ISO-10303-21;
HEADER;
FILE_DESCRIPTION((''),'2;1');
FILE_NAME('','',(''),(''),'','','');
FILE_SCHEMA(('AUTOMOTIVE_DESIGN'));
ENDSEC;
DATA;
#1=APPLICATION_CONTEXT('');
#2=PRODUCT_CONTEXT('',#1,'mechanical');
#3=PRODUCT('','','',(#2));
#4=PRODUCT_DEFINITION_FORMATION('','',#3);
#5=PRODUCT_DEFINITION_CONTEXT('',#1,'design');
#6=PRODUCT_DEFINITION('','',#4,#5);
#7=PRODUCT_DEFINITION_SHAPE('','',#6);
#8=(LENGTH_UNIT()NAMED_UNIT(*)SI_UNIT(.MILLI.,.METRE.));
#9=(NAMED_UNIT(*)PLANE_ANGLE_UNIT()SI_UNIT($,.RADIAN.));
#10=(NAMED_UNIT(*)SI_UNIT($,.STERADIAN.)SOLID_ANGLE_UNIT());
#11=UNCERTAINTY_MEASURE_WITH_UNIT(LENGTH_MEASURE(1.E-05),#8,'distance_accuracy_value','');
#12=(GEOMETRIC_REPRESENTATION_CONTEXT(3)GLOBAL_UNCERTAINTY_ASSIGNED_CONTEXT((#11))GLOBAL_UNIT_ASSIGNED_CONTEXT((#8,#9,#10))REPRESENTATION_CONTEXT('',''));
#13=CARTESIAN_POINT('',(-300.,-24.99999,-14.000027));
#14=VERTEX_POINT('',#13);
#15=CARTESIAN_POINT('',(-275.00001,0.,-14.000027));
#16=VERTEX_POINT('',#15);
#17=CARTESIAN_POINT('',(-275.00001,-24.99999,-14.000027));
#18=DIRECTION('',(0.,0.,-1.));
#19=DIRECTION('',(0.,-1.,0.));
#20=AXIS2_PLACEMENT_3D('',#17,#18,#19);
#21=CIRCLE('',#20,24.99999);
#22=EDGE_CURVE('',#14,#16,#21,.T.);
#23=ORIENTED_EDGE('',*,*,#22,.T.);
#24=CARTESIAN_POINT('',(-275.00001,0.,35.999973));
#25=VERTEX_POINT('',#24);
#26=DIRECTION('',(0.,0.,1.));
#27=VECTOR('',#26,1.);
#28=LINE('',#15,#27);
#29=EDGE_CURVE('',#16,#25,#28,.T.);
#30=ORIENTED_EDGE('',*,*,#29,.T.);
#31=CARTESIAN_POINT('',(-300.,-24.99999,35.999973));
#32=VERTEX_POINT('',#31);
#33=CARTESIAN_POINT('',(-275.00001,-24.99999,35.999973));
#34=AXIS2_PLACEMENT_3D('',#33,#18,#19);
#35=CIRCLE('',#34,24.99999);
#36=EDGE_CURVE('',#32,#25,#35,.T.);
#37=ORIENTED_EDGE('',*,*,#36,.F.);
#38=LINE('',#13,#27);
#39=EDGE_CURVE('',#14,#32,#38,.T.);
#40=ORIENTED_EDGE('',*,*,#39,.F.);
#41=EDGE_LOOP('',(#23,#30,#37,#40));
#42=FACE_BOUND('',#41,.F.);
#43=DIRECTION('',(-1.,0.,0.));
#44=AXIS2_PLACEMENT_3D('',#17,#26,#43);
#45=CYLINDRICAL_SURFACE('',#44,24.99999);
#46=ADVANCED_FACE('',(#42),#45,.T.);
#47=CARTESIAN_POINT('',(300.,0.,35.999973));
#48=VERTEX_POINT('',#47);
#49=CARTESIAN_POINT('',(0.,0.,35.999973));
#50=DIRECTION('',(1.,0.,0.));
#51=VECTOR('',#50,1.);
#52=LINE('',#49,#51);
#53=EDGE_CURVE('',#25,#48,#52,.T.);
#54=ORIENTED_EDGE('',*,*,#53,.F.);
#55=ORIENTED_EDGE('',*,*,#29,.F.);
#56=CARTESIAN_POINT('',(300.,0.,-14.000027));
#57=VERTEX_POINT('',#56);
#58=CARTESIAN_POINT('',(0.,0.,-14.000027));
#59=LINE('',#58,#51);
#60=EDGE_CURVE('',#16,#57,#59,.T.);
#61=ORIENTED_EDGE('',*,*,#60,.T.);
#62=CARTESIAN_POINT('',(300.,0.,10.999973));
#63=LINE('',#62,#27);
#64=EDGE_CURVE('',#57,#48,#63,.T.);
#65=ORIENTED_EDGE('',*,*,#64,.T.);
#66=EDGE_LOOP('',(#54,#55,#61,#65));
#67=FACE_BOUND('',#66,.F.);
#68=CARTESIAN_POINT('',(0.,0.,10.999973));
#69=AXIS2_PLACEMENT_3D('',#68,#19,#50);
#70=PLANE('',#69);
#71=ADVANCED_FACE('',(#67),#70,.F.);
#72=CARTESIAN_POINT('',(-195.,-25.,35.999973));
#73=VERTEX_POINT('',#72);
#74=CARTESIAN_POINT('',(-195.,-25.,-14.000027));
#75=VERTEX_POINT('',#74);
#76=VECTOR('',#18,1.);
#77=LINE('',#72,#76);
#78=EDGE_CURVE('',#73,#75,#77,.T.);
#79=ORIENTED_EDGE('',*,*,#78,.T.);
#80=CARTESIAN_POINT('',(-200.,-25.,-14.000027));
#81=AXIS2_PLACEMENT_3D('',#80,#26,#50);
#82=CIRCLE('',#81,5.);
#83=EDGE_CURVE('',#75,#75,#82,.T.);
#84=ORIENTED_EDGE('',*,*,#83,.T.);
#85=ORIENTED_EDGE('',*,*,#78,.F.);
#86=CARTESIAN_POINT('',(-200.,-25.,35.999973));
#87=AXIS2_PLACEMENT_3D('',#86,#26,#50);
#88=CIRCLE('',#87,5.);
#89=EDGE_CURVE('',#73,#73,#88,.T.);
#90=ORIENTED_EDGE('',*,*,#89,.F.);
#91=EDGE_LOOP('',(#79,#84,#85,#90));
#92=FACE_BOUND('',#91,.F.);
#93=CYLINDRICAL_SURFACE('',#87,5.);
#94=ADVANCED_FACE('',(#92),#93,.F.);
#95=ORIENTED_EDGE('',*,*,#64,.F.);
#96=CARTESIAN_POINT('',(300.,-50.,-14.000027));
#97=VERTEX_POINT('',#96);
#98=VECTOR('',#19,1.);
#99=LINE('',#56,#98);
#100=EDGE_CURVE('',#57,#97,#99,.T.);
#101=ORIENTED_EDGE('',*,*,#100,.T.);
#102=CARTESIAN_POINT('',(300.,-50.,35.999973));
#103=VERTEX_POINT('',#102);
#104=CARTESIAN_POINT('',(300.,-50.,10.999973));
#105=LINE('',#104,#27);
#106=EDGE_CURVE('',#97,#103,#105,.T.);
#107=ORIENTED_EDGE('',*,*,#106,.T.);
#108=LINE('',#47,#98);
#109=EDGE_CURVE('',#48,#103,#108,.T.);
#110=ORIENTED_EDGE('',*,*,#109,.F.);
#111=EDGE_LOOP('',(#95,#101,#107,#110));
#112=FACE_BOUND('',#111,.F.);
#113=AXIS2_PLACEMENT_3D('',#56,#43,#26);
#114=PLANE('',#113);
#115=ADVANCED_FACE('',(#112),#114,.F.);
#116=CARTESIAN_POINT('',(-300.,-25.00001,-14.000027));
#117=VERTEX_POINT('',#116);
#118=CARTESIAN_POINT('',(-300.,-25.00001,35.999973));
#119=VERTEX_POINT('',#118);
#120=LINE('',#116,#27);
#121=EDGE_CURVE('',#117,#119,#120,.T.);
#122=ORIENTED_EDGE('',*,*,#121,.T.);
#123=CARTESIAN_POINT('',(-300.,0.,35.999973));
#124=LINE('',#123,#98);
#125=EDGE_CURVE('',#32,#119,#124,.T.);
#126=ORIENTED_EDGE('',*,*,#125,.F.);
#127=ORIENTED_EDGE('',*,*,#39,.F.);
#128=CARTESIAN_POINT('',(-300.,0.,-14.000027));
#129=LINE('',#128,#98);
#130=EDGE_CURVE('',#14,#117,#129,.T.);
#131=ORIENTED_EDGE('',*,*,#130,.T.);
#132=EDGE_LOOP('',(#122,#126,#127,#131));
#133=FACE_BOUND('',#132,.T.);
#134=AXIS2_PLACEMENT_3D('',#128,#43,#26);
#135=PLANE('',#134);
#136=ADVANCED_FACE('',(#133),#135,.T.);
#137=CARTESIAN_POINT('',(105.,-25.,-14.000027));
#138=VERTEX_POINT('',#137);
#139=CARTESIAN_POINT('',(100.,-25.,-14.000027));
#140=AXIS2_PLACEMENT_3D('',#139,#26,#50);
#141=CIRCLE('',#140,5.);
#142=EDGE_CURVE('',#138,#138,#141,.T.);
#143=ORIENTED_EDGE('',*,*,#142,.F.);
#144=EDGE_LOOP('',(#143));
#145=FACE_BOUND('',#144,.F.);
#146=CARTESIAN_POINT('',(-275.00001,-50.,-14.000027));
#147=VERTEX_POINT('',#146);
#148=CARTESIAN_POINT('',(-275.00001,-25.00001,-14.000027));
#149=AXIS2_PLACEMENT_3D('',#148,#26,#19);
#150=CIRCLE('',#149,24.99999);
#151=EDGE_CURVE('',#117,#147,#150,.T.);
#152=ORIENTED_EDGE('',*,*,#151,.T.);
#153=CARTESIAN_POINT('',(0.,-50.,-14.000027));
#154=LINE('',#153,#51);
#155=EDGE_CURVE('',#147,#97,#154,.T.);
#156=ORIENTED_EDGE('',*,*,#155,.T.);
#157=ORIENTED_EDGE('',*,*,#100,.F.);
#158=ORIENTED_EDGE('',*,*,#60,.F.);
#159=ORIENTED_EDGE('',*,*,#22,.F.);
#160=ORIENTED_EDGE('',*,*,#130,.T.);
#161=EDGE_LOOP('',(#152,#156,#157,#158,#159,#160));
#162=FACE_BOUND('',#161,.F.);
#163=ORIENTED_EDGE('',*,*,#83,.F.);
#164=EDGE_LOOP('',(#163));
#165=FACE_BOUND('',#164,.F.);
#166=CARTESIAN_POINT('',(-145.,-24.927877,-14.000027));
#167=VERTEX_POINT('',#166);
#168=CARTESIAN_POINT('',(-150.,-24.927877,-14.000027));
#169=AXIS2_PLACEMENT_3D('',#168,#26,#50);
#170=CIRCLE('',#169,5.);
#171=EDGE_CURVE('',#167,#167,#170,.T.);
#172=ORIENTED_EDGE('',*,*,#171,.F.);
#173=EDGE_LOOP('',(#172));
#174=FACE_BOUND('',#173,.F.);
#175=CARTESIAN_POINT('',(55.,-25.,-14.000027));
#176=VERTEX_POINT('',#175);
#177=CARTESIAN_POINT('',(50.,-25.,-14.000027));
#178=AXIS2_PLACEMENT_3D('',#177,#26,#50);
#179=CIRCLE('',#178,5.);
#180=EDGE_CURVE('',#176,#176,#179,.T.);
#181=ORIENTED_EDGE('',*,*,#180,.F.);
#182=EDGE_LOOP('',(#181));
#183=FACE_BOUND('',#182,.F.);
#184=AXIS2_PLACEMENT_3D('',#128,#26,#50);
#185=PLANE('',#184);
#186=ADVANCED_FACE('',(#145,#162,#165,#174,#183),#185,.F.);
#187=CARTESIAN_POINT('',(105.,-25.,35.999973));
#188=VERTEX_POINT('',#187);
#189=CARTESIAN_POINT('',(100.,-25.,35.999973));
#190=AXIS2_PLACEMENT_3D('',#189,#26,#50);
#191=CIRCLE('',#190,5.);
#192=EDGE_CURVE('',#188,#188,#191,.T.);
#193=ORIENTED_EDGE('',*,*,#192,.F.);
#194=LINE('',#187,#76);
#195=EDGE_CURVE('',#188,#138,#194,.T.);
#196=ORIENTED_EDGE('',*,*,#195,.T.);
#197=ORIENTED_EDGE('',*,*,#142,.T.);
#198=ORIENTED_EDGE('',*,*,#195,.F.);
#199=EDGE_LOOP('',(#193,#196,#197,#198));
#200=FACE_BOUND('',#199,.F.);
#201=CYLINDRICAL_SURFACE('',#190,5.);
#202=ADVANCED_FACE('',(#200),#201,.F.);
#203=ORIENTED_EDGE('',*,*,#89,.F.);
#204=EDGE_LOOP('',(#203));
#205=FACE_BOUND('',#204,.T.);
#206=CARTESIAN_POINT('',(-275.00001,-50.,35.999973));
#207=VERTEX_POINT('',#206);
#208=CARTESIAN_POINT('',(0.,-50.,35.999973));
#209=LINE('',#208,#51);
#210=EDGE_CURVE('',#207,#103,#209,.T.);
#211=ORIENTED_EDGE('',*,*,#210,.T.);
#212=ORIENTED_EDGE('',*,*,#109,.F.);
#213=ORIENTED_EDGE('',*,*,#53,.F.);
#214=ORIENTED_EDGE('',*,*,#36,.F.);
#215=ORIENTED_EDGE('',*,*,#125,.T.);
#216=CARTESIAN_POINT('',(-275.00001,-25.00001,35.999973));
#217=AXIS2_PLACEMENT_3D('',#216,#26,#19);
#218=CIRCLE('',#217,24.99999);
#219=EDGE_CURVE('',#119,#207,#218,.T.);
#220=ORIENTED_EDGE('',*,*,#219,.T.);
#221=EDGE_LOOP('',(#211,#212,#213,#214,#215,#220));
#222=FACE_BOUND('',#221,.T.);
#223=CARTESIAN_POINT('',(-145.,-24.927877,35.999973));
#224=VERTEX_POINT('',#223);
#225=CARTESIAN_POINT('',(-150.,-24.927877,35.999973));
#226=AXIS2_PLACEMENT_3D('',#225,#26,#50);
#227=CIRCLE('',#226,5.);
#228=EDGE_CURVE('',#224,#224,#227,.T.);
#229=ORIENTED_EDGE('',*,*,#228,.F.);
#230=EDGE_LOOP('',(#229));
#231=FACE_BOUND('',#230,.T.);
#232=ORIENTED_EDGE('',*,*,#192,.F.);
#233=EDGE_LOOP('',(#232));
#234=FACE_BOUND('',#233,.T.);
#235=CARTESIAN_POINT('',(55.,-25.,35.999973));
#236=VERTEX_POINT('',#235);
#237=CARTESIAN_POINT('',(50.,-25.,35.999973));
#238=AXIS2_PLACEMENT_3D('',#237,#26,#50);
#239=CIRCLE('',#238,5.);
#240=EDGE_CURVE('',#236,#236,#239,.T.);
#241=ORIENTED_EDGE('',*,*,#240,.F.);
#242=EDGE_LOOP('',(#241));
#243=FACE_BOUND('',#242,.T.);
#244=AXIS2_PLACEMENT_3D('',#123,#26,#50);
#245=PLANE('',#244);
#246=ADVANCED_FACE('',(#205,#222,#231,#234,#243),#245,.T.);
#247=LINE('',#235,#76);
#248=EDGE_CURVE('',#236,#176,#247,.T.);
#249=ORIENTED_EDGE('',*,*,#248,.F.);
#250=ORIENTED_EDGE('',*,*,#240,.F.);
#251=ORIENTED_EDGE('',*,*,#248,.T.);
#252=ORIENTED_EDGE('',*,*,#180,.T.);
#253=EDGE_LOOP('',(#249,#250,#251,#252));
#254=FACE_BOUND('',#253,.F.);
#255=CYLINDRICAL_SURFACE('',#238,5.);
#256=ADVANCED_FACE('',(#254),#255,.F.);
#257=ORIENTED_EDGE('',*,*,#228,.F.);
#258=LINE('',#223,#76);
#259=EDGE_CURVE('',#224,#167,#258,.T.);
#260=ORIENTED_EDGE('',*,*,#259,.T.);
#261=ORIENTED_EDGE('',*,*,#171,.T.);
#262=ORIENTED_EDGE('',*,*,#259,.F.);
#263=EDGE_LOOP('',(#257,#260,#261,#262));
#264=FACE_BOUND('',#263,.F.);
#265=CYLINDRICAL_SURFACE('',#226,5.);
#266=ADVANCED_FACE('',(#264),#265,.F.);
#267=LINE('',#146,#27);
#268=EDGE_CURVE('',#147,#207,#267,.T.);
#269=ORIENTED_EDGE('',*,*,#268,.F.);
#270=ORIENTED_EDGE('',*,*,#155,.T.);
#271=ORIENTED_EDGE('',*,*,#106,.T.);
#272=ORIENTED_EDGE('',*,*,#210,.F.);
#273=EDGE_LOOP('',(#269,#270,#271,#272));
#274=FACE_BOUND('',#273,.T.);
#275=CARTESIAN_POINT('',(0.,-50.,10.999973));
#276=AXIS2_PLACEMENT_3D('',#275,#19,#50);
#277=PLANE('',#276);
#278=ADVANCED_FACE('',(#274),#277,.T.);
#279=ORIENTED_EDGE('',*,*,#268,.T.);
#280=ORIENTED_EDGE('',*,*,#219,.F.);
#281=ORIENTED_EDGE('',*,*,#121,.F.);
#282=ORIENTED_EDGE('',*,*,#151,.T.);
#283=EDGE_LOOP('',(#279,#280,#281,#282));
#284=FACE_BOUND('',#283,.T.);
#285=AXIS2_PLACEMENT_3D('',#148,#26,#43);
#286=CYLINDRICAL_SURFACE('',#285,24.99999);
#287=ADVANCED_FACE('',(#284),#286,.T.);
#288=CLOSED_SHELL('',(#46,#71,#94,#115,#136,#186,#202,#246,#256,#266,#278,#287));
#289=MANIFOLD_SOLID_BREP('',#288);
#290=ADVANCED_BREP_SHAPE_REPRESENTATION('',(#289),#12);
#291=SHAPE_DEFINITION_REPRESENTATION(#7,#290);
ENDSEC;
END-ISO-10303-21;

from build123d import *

# Parameters (mm, degrees)
F0_W     = 600
F0_H     = 50
F1_DEPTH = 50
F2_R     = 5
F3_DEPTH = 50.001
F4_R     = 24.99999


# Not quite as in the source:
# - a fillet or chamfer is up to 0.001 mm smaller than in the source, because OpenCascade refuses the exact size


with BuildPart() as f1:
    # F0 (on Front) → F1 (new body)
    with BuildSketch(Plane.XZ):
        with Locations((0, 10.9999733963)):
            Rectangle(F0_W, F0_H)
    extrude(amount=F1_DEPTH)

    # F2 (on face) → F3 (cut, through all)
    with BuildSketch(Plane.XY.offset(35.9999733963)):
        with Locations((50, -25)):
            Circle(F2_R)
        with Locations((-200, -25)):
            Circle(F2_R)
        with Locations((100, -25)):
            Circle(F2_R)
        with Locations((-150, -24.9278768897)):
            Circle(F2_R)
    extrude(amount=-F3_DEPTH, mode=Mode.SUBTRACT)

    # F4 (radius 25 in the source; OpenCascade refuses exactly that, so slightly less here)
    f4_edges = [f1.edges().sort_by_distance(p)[0] for p in [
        (-300, 0, 10.999973),
        (-300, -50, 10.999973),
    ]]
    fillet(f4_edges, radius=F4_R)


solid = f1.part
